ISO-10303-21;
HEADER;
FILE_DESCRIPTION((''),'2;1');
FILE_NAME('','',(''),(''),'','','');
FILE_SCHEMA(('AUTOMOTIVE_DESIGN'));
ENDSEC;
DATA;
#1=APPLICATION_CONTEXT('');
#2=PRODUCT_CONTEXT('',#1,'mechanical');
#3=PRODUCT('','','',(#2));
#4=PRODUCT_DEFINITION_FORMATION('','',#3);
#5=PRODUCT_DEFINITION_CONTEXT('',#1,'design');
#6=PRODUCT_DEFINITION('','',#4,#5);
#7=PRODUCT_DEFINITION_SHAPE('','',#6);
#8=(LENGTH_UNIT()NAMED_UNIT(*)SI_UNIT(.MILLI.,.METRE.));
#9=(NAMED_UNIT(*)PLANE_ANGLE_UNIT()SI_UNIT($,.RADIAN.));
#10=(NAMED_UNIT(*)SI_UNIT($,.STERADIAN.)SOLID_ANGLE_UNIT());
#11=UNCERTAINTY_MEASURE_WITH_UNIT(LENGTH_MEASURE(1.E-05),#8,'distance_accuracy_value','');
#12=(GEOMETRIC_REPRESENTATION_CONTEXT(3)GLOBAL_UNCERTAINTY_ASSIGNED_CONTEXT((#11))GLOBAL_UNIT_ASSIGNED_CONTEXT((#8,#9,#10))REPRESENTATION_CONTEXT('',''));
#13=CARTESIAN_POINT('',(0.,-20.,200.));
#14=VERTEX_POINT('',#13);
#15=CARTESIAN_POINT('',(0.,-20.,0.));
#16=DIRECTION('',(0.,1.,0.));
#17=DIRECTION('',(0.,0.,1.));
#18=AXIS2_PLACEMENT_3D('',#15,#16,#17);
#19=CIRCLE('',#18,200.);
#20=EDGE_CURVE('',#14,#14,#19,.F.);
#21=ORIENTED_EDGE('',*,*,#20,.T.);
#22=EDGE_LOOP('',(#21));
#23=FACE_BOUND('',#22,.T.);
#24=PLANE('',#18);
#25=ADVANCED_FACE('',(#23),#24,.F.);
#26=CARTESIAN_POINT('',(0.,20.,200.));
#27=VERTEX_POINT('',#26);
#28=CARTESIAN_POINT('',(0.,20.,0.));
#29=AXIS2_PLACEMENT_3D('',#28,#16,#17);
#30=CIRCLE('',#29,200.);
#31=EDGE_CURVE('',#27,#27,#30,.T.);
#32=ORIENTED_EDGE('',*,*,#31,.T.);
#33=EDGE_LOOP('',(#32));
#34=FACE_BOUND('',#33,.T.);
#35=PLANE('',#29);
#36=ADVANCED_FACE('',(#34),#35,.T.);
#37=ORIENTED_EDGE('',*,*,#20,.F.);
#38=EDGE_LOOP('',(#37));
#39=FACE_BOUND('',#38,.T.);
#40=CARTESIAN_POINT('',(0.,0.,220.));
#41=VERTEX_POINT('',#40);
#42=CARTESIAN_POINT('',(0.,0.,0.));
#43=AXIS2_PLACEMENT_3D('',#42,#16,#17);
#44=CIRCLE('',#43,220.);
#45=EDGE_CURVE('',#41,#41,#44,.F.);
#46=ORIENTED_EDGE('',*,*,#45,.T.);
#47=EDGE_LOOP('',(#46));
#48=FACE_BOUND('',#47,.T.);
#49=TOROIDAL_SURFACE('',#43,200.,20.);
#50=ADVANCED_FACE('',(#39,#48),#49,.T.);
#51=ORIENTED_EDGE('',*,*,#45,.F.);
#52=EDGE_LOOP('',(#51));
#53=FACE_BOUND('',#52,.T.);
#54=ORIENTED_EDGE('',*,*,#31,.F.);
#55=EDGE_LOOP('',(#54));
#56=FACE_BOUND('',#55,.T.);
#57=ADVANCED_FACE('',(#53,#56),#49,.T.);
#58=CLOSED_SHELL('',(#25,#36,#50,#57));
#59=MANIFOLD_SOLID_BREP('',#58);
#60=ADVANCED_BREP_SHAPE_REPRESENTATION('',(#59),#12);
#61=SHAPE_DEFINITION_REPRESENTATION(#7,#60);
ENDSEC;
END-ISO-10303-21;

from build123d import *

# Parameters (mm, degrees)
BOSS_EXTRUDE1_DEPTH      = 20
BOSS_EXTRUDE1_DEPTH_BACK = 20
SKETCH2_R                = 220
FILLET1_R                = 20


with BuildPart() as part:
    # Sketch2 → Boss-Extrude1 (new, two sides: drawn at the far end of the back side and taken through both)
    with BuildSketch(Plane(origin=(0, 0, 0), x_dir=(1, 0, 0), z_dir=(0, 1, 0)).offset(-BOSS_EXTRUDE1_DEPTH_BACK)):
        with Locations(Location((0, 0, 0), (0, 0, 270))):
            Circle(SKETCH2_R)
    extrude(amount=BOSS_EXTRUDE1_DEPTH + BOSS_EXTRUDE1_DEPTH_BACK)

    # Fillet1
    fillet1_edges = [part.edges().sort_by_distance(p)[0] for p in [
        (0, -20, -220),
        (0, 20, -220),
    ]]
    fillet(fillet1_edges, radius=FILLET1_R - 0.0001)  # a hair under: the kernel refuses the full size


solid = part.part
